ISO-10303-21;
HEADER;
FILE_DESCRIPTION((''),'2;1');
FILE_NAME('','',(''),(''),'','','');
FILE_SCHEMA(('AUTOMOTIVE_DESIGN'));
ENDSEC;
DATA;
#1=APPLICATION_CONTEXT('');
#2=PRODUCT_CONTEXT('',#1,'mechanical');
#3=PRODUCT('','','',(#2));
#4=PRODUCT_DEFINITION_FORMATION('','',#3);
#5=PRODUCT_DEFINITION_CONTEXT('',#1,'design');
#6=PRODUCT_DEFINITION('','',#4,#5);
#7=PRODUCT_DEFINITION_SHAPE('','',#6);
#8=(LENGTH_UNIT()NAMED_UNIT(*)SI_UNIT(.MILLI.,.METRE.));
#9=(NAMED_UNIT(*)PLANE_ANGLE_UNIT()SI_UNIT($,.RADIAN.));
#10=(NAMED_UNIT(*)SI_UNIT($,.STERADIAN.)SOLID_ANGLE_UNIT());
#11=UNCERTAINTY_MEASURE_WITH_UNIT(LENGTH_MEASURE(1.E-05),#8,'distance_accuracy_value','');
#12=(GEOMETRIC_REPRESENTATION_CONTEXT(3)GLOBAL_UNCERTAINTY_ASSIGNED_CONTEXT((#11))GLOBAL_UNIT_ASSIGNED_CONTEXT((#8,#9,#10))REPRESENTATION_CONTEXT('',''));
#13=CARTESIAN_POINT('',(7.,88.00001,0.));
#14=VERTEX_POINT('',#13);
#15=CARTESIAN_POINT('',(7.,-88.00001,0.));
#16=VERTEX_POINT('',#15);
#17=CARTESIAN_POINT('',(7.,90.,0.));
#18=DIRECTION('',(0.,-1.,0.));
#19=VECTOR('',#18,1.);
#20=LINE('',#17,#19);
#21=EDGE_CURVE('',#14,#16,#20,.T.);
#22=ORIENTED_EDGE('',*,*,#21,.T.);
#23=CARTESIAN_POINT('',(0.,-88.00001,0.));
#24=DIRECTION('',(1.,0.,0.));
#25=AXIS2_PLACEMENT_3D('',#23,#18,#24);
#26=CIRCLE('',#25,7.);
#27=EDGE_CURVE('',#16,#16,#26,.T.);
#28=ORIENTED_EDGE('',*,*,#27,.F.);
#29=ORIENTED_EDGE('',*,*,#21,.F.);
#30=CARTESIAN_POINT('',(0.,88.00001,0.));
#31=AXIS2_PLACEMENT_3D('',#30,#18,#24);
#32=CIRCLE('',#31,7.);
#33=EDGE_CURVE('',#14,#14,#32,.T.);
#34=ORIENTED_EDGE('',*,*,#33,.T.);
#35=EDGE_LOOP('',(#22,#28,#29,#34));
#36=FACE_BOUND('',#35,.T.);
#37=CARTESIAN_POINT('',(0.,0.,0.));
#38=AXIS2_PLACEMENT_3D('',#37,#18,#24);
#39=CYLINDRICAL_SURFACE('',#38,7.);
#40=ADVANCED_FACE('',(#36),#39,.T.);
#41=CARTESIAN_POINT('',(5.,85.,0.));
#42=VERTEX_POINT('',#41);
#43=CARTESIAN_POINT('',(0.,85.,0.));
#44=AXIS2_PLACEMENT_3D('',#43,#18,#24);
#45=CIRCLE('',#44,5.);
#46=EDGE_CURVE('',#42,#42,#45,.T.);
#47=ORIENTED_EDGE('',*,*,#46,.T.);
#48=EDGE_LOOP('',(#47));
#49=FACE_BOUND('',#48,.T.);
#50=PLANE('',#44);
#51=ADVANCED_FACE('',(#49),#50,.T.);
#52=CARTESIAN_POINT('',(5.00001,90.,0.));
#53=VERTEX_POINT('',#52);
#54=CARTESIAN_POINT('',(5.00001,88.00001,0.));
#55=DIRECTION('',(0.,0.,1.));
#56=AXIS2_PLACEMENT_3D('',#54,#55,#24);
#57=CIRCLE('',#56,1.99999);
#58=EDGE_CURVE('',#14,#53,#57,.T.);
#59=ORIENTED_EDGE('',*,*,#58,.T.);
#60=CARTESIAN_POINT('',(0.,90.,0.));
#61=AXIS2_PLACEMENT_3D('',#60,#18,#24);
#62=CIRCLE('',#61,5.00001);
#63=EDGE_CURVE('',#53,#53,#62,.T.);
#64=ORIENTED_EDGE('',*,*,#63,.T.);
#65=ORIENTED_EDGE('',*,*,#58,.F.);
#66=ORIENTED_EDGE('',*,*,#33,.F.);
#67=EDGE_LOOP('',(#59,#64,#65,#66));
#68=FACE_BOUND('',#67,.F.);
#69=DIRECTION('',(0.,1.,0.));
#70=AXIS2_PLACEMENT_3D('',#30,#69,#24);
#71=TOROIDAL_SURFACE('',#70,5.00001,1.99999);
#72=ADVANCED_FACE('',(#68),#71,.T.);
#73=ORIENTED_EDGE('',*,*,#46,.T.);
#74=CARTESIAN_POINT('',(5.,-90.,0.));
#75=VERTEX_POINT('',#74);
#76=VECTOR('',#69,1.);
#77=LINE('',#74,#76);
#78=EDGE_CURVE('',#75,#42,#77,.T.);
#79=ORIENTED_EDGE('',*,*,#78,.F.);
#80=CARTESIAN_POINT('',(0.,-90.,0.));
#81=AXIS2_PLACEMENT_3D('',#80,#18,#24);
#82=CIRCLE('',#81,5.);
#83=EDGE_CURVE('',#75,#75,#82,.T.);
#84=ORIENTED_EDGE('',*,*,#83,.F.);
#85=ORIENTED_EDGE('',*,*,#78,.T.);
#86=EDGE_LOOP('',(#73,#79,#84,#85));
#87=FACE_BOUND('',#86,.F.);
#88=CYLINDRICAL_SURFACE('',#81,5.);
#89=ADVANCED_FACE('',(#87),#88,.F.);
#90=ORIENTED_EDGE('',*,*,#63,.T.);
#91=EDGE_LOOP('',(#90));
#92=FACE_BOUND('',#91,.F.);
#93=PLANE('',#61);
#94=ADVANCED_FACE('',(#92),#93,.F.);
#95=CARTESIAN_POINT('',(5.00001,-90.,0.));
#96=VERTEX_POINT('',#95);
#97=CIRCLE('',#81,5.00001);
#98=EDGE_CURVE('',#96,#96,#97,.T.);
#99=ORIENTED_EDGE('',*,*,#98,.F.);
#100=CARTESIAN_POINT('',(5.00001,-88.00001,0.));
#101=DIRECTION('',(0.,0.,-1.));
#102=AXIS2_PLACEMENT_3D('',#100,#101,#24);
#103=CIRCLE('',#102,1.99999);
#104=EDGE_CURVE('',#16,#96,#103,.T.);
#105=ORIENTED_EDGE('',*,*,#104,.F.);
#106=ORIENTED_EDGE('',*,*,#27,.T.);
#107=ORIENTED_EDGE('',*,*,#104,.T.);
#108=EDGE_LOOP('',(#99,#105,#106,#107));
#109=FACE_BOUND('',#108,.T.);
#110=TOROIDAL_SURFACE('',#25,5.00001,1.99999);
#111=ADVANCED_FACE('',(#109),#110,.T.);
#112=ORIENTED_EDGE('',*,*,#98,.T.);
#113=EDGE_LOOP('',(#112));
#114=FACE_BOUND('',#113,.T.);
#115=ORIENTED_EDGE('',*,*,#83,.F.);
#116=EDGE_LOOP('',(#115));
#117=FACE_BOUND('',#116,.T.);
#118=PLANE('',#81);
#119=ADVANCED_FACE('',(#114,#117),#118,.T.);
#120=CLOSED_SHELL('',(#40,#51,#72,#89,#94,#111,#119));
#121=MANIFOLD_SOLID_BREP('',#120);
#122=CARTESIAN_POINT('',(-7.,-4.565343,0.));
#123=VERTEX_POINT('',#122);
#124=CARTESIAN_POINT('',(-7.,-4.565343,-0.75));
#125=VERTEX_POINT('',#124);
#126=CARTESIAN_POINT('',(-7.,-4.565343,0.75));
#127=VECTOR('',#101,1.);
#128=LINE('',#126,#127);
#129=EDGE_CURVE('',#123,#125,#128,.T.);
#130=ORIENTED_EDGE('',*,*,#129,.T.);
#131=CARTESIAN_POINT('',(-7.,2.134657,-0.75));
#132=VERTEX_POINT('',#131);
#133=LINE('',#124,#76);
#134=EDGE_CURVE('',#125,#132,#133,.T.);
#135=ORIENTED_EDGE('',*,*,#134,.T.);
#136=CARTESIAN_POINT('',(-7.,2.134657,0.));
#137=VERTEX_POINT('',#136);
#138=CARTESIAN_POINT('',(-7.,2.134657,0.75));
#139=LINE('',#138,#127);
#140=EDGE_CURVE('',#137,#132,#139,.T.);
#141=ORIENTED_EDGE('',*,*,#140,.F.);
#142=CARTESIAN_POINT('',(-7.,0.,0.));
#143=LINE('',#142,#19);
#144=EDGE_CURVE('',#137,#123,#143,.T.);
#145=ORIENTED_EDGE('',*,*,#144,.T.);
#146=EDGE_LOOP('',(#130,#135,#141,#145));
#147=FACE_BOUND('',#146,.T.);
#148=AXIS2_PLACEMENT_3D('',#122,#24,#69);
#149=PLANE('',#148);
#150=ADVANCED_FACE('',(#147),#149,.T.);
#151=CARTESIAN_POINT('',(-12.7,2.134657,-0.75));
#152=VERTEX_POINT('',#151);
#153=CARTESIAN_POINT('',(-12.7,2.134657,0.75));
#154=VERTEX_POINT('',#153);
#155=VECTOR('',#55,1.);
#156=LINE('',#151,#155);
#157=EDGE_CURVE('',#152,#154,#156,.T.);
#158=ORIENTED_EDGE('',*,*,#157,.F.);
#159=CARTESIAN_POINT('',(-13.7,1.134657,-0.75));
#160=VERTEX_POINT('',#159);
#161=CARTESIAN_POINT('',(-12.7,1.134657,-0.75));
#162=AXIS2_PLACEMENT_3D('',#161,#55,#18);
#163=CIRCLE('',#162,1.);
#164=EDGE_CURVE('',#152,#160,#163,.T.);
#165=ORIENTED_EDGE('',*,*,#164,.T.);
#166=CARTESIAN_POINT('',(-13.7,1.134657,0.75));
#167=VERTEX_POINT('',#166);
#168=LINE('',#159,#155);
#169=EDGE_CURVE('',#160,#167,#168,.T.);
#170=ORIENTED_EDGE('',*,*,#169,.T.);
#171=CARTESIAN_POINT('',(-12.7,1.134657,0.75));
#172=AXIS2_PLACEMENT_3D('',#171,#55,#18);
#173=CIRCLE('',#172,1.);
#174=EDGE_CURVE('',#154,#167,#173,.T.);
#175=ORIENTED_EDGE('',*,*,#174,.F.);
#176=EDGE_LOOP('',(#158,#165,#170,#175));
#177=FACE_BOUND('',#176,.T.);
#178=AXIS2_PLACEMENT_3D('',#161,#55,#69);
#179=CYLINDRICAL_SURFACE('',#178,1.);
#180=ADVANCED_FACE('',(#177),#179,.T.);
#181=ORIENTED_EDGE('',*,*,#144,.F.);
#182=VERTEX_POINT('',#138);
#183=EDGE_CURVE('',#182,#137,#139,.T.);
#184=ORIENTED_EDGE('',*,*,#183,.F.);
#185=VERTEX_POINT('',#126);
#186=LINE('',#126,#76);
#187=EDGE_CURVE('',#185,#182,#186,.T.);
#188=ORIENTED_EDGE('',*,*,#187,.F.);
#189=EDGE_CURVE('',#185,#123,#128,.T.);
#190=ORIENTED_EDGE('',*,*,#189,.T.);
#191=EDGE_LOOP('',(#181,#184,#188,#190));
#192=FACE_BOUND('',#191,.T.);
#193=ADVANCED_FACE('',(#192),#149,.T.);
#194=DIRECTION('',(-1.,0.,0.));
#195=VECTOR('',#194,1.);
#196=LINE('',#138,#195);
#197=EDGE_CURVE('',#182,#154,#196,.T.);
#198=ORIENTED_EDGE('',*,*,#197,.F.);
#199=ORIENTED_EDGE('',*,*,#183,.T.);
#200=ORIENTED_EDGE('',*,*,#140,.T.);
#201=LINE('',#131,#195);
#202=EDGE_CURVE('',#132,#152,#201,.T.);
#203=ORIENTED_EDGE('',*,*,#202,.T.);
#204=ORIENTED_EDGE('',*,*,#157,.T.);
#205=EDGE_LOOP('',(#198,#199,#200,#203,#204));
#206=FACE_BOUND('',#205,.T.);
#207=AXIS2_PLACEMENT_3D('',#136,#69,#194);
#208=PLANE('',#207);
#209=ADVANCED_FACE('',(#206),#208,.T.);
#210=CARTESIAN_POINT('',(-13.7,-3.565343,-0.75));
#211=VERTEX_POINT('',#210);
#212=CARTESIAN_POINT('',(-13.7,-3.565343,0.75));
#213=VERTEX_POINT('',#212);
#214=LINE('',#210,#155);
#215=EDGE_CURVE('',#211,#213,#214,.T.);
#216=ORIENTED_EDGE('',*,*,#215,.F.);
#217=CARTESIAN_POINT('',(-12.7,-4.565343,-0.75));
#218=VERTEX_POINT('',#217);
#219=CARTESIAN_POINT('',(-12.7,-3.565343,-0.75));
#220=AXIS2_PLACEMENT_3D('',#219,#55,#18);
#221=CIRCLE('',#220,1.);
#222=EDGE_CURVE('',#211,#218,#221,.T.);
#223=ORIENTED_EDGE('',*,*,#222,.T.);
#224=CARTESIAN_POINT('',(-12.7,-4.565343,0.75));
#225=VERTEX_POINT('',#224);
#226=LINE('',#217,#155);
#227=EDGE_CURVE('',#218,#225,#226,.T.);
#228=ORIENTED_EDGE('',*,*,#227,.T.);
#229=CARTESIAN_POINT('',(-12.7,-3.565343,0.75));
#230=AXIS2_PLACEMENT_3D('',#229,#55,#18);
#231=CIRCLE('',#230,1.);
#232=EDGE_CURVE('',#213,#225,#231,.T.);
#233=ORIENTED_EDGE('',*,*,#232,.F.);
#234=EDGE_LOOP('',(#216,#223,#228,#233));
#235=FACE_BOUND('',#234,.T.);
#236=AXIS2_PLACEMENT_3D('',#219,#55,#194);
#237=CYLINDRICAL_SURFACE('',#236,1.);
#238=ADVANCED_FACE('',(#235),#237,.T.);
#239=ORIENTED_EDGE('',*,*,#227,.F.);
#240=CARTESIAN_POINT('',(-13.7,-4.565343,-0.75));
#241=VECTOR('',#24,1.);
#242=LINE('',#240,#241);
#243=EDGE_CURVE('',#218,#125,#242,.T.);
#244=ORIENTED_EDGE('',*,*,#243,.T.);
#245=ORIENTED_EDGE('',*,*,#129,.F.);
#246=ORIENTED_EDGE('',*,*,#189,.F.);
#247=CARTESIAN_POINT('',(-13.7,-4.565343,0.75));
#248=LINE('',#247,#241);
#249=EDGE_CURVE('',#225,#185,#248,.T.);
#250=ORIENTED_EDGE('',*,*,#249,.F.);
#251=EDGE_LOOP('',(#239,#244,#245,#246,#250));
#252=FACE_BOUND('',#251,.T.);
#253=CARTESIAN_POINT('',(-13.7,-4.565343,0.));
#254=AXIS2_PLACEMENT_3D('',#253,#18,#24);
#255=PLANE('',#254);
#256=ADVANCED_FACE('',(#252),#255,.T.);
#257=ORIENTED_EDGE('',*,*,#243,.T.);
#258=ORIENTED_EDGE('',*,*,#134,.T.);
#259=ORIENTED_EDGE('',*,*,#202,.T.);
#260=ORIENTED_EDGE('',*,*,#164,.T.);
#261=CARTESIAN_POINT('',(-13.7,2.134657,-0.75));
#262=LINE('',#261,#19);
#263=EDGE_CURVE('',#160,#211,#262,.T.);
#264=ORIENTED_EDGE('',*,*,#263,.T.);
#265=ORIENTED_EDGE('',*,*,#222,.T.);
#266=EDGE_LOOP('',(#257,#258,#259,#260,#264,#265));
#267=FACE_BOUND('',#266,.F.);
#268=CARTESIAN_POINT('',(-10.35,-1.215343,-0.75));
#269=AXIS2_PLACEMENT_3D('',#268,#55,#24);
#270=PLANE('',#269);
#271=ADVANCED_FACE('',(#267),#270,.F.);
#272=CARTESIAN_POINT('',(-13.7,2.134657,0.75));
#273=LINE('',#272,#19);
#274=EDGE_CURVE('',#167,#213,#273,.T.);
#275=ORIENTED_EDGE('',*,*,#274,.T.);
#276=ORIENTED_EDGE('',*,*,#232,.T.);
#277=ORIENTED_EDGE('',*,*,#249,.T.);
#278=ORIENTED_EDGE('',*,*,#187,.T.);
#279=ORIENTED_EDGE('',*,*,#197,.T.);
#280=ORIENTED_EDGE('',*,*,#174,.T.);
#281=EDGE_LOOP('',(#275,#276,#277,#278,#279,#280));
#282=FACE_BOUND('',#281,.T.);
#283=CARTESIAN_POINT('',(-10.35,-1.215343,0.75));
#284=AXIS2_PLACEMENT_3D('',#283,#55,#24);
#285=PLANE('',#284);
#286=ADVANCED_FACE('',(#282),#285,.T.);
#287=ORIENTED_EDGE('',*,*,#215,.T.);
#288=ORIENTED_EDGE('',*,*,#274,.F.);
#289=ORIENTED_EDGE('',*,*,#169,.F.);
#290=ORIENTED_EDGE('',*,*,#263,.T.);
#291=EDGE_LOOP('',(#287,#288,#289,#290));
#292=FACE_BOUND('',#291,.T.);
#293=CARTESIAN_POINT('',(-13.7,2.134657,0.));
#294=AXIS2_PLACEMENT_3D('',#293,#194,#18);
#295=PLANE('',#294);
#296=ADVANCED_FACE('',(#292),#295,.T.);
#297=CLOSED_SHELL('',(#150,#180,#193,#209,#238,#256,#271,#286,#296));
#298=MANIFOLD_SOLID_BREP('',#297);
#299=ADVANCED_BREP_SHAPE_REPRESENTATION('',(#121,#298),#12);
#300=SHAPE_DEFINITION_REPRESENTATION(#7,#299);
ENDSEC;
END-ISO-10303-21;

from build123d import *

# Parameters (mm, degrees)
F0_R     = 7
F0_R_2   = 5
F1_DEPTH = 90
F2_R     = 5
F3_DEPTH = 175
F4_R     = 1.99999
F6_DEPTH = 0.75
F7_R     = 1


# Not quite as in the source:
# - a fillet or chamfer is up to 0.001 mm smaller than in the source, because OpenCascade refuses the exact size


with BuildPart() as f1:
    # F0 (on Front) → F1 (new body, symmetric)
    with BuildSketch(Plane.XZ):
        Circle(F0_R)
        Circle(F0_R_2, mode=Mode.SUBTRACT)
        Circle(F0_R_2)
    extrude(amount=F1_DEPTH, both=True)

    # F2 (on face) → F3 (cut)
    with BuildSketch(Plane.XZ.offset(90)):
        Circle(F2_R)
    extrude(amount=-F3_DEPTH, mode=Mode.SUBTRACT)

    # F4 (radius 2 in the source; OpenCascade refuses exactly that, so slightly less here)
    f4_edges = [f1.edges().sort_by_distance(p)[0] for p in [
        (-7, 90, 0),
        (-7, -90, 0),
    ]]
    fillet(f4_edges, radius=F4_R)

    # F5 (on Top) → F6 (join, symmetric)
    with BuildSketch(Plane.XY):
        Polygon((-7, 0), (-7, 2.1346567392), (-13.7, 2.1346567392), (-13.7, -4.5653432608), (-7, -4.5653432608), align=None)
    extrude(amount=F6_DEPTH, both=True)

    # F7
    f7_edges = [f1.edges().sort_by_distance(p)[0] for p in [
        (-13.7, 2.134657, 0),
        (-13.7, -4.565343, 0),
    ]]
    fillet(f7_edges, radius=F7_R)


solid = f1.part
